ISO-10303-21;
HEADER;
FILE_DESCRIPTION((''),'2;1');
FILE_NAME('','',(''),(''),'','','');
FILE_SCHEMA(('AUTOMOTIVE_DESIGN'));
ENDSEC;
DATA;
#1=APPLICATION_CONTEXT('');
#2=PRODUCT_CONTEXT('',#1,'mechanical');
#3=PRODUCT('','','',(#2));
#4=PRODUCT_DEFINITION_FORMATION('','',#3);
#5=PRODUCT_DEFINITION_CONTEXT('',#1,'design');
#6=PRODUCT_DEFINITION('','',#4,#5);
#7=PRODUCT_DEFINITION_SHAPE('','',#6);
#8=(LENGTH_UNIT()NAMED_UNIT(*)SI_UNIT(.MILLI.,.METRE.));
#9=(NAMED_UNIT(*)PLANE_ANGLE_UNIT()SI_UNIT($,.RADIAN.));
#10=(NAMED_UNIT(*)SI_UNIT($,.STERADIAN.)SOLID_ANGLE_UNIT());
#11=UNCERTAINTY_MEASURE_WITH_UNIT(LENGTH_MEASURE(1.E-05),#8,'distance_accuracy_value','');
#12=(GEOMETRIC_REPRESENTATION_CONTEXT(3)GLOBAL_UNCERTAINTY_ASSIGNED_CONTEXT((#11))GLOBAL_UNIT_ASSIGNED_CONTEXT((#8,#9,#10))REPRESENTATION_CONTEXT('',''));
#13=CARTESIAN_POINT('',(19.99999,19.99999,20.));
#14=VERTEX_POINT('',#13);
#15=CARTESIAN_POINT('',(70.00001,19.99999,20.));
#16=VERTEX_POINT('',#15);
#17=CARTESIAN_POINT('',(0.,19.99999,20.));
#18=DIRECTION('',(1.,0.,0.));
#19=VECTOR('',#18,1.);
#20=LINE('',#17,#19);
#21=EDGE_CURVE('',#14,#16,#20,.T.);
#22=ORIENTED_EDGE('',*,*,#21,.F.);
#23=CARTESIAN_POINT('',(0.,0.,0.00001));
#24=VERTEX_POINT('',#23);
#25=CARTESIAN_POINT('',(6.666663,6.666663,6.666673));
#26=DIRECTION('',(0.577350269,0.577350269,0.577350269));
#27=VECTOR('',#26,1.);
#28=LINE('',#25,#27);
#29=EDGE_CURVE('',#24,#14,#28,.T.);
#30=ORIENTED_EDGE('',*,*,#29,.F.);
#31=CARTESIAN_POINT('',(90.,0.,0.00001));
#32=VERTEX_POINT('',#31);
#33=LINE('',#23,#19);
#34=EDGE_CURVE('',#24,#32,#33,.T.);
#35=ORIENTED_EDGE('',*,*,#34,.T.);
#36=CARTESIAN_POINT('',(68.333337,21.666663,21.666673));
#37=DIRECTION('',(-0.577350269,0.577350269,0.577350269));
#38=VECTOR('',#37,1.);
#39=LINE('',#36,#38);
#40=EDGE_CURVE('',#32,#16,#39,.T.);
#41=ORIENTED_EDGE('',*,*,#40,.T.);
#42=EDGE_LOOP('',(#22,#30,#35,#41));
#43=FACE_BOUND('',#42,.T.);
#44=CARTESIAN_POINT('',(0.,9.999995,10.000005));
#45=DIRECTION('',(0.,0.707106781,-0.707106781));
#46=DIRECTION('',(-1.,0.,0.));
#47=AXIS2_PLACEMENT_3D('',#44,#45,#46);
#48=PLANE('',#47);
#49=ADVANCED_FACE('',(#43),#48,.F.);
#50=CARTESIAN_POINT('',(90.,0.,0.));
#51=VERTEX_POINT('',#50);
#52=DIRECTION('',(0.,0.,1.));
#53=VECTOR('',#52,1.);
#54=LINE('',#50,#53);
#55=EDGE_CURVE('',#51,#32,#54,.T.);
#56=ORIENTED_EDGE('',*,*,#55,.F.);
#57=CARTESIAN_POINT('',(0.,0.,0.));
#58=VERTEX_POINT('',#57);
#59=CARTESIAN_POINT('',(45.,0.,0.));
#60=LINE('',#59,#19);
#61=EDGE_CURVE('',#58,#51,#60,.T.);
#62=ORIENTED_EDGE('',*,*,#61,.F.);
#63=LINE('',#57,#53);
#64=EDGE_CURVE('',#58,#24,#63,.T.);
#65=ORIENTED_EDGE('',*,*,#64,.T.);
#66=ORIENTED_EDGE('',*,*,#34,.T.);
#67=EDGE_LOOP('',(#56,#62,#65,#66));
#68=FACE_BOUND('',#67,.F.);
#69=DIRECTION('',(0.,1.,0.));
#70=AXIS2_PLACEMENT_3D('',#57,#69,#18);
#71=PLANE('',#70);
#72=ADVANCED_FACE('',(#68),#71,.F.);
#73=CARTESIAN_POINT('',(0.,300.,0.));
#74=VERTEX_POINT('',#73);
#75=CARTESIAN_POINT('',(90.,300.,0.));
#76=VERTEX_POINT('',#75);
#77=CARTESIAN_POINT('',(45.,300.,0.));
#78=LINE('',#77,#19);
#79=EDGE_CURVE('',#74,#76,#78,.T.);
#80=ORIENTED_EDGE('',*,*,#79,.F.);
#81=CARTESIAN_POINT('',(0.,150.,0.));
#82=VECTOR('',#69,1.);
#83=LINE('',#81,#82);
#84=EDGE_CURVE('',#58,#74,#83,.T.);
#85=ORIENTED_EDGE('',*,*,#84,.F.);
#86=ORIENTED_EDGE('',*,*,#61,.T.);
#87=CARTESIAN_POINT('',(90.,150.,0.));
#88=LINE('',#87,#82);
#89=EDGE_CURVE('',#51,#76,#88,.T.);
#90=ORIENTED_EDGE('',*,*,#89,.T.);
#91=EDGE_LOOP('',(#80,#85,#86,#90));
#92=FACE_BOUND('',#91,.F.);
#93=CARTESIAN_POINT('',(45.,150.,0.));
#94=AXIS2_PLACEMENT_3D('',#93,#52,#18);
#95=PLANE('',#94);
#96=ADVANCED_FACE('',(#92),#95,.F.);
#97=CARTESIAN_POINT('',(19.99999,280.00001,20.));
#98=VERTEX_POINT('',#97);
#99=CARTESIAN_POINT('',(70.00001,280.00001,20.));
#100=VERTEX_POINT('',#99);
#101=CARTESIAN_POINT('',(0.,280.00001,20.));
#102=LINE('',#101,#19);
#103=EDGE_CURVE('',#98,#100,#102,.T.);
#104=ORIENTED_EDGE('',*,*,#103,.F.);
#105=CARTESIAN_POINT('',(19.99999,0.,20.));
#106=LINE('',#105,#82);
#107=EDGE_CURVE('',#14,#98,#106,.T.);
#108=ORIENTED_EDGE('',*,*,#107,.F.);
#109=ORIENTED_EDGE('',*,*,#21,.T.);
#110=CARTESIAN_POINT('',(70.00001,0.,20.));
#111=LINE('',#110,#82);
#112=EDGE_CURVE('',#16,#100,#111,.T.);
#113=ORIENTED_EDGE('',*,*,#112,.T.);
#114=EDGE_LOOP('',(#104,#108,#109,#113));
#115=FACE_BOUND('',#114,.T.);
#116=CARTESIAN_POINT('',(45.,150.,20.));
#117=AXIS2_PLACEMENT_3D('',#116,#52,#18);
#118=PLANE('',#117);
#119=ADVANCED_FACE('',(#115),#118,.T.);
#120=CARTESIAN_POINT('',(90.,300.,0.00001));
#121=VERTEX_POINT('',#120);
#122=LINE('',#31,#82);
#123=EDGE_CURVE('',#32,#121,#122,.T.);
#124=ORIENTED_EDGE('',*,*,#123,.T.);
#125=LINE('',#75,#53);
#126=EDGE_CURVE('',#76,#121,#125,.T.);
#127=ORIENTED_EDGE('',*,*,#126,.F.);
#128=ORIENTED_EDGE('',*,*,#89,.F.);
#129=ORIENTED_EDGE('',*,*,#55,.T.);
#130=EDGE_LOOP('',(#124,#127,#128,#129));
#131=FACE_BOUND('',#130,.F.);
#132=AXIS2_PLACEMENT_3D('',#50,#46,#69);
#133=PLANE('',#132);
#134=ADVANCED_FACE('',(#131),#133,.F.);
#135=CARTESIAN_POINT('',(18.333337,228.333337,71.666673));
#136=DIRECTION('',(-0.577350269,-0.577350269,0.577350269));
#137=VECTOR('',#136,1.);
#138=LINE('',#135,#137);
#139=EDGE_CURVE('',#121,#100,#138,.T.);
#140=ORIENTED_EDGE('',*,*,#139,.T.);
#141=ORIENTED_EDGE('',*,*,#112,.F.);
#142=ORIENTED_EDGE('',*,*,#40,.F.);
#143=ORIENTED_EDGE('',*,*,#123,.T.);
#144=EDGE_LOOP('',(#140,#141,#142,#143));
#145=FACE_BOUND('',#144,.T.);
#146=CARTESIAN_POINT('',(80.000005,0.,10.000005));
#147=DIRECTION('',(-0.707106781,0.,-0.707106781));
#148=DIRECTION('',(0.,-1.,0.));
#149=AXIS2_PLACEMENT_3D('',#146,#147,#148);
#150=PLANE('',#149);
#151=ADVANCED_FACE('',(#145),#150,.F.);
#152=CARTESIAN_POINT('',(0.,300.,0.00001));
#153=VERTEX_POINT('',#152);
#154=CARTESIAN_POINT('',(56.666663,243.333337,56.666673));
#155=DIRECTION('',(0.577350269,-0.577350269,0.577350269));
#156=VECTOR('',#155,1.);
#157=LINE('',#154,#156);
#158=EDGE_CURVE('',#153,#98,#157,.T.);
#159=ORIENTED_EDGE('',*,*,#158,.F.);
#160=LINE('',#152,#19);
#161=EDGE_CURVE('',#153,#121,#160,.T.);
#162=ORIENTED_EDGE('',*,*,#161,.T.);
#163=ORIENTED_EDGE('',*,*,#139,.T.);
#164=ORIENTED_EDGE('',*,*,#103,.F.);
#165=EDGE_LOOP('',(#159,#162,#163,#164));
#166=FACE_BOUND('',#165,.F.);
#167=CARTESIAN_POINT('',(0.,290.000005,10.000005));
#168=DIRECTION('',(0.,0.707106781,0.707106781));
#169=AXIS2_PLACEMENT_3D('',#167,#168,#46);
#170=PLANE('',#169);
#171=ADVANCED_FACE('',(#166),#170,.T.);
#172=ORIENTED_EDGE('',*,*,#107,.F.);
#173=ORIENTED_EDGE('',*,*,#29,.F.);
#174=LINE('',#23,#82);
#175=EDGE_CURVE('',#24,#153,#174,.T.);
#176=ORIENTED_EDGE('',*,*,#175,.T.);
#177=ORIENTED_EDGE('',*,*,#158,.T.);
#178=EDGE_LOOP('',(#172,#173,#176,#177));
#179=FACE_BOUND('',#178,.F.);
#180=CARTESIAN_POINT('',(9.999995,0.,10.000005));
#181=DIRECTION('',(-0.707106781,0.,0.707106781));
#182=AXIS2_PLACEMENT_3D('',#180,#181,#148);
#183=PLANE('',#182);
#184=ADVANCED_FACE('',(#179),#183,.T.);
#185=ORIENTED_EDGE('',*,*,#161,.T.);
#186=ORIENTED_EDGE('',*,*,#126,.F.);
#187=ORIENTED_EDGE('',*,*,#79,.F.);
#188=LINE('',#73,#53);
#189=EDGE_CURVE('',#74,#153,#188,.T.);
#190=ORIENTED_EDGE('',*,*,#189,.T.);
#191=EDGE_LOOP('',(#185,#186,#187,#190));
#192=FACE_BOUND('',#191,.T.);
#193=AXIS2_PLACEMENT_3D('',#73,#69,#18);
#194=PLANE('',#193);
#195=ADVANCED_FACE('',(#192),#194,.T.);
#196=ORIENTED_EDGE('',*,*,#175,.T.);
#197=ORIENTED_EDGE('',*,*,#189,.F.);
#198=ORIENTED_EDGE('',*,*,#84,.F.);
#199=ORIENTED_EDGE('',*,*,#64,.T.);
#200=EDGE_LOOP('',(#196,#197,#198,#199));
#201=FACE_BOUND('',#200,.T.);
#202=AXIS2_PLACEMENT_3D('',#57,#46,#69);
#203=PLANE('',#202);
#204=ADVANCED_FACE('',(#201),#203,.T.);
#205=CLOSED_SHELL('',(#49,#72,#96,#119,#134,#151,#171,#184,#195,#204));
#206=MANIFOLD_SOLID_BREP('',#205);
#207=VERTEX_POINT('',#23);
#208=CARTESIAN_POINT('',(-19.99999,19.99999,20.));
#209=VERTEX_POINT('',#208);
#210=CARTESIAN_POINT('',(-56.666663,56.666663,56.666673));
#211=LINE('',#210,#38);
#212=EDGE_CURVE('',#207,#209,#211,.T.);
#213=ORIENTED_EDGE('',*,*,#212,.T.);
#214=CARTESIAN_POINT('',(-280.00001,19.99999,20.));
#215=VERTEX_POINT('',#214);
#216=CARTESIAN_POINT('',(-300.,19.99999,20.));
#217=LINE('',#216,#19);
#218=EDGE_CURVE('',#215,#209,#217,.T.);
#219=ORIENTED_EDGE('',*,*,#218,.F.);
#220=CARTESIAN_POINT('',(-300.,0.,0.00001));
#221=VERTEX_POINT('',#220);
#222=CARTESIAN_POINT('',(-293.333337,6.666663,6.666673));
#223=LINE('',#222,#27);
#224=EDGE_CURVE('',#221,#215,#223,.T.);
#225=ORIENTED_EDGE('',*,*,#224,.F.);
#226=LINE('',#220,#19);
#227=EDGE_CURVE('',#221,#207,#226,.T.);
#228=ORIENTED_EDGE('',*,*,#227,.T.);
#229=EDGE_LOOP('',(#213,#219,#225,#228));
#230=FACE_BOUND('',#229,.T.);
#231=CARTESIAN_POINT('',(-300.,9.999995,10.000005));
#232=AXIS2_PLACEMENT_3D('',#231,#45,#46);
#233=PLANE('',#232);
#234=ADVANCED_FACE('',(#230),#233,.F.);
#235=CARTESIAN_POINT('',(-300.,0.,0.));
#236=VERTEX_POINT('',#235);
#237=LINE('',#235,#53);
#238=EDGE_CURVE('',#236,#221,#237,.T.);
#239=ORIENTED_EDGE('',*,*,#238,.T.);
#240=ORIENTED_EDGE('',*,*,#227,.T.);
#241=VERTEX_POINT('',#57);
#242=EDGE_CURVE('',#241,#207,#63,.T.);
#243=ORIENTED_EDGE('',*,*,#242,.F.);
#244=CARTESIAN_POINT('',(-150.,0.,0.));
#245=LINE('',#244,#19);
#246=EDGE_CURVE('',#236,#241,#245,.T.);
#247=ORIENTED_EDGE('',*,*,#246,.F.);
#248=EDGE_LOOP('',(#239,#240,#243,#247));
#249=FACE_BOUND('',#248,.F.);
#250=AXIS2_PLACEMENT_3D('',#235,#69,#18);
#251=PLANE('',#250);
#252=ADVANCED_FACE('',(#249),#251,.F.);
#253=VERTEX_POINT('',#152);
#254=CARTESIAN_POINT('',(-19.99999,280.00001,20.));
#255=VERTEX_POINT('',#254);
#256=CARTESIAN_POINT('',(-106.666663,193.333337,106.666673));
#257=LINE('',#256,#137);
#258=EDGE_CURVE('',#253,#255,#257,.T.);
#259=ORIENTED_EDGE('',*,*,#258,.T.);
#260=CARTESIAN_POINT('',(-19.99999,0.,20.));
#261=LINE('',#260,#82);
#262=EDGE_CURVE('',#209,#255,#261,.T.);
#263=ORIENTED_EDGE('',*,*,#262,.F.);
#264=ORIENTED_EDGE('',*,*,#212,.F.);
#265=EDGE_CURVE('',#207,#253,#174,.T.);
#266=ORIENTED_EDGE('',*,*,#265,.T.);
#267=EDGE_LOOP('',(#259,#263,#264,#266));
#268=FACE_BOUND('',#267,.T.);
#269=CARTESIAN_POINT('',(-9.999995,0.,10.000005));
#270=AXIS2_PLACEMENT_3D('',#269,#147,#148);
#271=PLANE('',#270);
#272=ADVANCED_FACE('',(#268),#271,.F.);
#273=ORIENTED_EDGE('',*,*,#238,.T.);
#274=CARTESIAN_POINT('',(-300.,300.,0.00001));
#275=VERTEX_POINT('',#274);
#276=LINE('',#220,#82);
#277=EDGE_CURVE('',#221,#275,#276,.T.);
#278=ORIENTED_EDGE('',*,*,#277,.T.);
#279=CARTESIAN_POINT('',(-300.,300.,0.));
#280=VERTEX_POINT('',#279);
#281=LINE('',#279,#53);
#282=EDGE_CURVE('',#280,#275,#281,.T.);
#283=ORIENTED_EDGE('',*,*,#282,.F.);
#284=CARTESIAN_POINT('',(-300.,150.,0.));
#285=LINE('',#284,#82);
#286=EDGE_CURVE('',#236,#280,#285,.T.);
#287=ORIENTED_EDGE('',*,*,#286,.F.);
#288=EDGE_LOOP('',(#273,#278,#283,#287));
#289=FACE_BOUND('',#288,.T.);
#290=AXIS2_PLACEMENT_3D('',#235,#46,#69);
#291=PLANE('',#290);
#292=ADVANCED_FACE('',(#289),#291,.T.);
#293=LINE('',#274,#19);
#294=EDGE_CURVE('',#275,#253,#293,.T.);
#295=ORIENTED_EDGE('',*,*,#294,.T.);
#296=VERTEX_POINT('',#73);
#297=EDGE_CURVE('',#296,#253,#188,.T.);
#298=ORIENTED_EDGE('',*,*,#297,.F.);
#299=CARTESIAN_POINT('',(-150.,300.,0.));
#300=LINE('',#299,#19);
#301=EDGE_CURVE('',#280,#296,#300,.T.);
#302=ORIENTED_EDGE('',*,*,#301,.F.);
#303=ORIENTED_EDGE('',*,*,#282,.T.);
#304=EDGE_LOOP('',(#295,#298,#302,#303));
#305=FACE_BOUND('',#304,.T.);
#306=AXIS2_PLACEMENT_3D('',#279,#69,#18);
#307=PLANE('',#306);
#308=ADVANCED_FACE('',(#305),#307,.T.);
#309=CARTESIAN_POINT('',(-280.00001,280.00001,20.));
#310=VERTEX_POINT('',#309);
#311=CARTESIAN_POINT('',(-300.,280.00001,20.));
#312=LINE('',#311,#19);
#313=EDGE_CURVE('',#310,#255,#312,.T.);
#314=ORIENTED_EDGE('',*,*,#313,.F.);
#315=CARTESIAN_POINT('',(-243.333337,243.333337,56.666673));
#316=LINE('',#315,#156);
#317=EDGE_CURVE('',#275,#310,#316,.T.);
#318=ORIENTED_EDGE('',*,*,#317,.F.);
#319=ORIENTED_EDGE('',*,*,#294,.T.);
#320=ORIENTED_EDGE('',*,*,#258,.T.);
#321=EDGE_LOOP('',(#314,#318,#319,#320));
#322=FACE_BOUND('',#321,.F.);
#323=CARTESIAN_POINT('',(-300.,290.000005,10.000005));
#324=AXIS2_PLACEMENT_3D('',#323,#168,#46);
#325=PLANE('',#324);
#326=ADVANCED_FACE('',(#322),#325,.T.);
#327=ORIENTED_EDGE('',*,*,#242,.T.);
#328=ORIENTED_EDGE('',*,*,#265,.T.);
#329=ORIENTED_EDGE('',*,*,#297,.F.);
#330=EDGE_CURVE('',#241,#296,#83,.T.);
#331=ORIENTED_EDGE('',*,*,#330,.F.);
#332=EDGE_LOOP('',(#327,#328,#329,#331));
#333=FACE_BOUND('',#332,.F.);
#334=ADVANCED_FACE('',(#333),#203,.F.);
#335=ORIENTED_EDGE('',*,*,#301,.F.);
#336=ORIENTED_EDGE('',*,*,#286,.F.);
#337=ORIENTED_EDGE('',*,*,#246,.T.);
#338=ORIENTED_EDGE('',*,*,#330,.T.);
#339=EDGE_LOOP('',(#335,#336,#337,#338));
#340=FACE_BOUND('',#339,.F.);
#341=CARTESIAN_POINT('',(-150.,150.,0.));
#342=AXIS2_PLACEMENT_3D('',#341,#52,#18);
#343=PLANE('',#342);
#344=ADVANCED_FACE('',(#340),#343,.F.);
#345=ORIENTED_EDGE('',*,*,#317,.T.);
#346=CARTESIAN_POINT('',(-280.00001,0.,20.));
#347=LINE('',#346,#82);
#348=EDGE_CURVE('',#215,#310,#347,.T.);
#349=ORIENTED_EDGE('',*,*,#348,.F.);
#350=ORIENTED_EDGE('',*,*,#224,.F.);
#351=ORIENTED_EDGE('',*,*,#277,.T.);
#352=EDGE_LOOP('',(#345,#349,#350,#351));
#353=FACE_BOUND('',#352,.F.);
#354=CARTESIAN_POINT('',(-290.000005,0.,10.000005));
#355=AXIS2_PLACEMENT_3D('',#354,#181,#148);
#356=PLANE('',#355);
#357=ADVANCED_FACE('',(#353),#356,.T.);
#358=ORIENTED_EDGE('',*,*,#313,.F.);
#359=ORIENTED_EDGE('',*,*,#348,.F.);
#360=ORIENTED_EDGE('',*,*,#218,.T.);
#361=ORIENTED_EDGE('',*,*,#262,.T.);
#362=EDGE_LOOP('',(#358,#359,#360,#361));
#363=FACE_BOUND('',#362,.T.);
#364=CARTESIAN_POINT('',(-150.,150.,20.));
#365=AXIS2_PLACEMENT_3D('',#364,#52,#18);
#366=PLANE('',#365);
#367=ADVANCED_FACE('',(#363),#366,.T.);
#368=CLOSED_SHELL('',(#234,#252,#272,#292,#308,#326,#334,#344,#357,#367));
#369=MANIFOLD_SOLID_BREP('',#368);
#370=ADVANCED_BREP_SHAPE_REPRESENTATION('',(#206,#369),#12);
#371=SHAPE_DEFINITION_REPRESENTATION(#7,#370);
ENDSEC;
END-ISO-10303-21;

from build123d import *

# Parameters (mm, degrees)
F0_W     = 300
F0_H     = 300
F1_DEPTH = 20
F2_SIZE  = 19.99999
F3_W     = 90
F3_H     = 300
F4_DEPTH = 20
F5_SIZE  = 19.99999


# Not quite as in the source:
# - a fillet or chamfer is up to 0.001 mm smaller than in the source, because OpenCascade refuses the exact size


with BuildPart() as f1:
    # F0 (on Top) → F1 (new body)
    with BuildSketch(Plane.XY):
        with Locations((-150, 150)):
            Rectangle(F0_W, F0_H)
    extrude(amount=F1_DEPTH)

    # F2 (size 20 in the source; OpenCascade refuses exactly that, so slightly less here)
    f2_edges = [f1.edges().sort_by_distance(p)[0] for p in [
        (-150, 0, 20),
        (0, 150, 20),
        (-150, 300, 20),
        (-300, 150, 20),
    ]]
    chamfer(f2_edges, length=F2_SIZE)


with BuildPart() as f4:
    # F3 (on Top) → F4 (new body)
    with BuildSketch(Plane.XY):
        with Locations((45, 150)):
            Rectangle(F3_W, F3_H)
    extrude(amount=F4_DEPTH)

    # F5 (size 20 in the source; OpenCascade refuses exactly that, so slightly less here)
    f5_edges = [f4.edges().sort_by_distance(p)[0] for p in [
        (0, 150, 20),
        (45, 0, 20),
        (90, 150, 20),
        (45, 300, 20),
    ]]
    chamfer(f5_edges, length=F5_SIZE)


solid = Compound([f1.part, f4.part])
